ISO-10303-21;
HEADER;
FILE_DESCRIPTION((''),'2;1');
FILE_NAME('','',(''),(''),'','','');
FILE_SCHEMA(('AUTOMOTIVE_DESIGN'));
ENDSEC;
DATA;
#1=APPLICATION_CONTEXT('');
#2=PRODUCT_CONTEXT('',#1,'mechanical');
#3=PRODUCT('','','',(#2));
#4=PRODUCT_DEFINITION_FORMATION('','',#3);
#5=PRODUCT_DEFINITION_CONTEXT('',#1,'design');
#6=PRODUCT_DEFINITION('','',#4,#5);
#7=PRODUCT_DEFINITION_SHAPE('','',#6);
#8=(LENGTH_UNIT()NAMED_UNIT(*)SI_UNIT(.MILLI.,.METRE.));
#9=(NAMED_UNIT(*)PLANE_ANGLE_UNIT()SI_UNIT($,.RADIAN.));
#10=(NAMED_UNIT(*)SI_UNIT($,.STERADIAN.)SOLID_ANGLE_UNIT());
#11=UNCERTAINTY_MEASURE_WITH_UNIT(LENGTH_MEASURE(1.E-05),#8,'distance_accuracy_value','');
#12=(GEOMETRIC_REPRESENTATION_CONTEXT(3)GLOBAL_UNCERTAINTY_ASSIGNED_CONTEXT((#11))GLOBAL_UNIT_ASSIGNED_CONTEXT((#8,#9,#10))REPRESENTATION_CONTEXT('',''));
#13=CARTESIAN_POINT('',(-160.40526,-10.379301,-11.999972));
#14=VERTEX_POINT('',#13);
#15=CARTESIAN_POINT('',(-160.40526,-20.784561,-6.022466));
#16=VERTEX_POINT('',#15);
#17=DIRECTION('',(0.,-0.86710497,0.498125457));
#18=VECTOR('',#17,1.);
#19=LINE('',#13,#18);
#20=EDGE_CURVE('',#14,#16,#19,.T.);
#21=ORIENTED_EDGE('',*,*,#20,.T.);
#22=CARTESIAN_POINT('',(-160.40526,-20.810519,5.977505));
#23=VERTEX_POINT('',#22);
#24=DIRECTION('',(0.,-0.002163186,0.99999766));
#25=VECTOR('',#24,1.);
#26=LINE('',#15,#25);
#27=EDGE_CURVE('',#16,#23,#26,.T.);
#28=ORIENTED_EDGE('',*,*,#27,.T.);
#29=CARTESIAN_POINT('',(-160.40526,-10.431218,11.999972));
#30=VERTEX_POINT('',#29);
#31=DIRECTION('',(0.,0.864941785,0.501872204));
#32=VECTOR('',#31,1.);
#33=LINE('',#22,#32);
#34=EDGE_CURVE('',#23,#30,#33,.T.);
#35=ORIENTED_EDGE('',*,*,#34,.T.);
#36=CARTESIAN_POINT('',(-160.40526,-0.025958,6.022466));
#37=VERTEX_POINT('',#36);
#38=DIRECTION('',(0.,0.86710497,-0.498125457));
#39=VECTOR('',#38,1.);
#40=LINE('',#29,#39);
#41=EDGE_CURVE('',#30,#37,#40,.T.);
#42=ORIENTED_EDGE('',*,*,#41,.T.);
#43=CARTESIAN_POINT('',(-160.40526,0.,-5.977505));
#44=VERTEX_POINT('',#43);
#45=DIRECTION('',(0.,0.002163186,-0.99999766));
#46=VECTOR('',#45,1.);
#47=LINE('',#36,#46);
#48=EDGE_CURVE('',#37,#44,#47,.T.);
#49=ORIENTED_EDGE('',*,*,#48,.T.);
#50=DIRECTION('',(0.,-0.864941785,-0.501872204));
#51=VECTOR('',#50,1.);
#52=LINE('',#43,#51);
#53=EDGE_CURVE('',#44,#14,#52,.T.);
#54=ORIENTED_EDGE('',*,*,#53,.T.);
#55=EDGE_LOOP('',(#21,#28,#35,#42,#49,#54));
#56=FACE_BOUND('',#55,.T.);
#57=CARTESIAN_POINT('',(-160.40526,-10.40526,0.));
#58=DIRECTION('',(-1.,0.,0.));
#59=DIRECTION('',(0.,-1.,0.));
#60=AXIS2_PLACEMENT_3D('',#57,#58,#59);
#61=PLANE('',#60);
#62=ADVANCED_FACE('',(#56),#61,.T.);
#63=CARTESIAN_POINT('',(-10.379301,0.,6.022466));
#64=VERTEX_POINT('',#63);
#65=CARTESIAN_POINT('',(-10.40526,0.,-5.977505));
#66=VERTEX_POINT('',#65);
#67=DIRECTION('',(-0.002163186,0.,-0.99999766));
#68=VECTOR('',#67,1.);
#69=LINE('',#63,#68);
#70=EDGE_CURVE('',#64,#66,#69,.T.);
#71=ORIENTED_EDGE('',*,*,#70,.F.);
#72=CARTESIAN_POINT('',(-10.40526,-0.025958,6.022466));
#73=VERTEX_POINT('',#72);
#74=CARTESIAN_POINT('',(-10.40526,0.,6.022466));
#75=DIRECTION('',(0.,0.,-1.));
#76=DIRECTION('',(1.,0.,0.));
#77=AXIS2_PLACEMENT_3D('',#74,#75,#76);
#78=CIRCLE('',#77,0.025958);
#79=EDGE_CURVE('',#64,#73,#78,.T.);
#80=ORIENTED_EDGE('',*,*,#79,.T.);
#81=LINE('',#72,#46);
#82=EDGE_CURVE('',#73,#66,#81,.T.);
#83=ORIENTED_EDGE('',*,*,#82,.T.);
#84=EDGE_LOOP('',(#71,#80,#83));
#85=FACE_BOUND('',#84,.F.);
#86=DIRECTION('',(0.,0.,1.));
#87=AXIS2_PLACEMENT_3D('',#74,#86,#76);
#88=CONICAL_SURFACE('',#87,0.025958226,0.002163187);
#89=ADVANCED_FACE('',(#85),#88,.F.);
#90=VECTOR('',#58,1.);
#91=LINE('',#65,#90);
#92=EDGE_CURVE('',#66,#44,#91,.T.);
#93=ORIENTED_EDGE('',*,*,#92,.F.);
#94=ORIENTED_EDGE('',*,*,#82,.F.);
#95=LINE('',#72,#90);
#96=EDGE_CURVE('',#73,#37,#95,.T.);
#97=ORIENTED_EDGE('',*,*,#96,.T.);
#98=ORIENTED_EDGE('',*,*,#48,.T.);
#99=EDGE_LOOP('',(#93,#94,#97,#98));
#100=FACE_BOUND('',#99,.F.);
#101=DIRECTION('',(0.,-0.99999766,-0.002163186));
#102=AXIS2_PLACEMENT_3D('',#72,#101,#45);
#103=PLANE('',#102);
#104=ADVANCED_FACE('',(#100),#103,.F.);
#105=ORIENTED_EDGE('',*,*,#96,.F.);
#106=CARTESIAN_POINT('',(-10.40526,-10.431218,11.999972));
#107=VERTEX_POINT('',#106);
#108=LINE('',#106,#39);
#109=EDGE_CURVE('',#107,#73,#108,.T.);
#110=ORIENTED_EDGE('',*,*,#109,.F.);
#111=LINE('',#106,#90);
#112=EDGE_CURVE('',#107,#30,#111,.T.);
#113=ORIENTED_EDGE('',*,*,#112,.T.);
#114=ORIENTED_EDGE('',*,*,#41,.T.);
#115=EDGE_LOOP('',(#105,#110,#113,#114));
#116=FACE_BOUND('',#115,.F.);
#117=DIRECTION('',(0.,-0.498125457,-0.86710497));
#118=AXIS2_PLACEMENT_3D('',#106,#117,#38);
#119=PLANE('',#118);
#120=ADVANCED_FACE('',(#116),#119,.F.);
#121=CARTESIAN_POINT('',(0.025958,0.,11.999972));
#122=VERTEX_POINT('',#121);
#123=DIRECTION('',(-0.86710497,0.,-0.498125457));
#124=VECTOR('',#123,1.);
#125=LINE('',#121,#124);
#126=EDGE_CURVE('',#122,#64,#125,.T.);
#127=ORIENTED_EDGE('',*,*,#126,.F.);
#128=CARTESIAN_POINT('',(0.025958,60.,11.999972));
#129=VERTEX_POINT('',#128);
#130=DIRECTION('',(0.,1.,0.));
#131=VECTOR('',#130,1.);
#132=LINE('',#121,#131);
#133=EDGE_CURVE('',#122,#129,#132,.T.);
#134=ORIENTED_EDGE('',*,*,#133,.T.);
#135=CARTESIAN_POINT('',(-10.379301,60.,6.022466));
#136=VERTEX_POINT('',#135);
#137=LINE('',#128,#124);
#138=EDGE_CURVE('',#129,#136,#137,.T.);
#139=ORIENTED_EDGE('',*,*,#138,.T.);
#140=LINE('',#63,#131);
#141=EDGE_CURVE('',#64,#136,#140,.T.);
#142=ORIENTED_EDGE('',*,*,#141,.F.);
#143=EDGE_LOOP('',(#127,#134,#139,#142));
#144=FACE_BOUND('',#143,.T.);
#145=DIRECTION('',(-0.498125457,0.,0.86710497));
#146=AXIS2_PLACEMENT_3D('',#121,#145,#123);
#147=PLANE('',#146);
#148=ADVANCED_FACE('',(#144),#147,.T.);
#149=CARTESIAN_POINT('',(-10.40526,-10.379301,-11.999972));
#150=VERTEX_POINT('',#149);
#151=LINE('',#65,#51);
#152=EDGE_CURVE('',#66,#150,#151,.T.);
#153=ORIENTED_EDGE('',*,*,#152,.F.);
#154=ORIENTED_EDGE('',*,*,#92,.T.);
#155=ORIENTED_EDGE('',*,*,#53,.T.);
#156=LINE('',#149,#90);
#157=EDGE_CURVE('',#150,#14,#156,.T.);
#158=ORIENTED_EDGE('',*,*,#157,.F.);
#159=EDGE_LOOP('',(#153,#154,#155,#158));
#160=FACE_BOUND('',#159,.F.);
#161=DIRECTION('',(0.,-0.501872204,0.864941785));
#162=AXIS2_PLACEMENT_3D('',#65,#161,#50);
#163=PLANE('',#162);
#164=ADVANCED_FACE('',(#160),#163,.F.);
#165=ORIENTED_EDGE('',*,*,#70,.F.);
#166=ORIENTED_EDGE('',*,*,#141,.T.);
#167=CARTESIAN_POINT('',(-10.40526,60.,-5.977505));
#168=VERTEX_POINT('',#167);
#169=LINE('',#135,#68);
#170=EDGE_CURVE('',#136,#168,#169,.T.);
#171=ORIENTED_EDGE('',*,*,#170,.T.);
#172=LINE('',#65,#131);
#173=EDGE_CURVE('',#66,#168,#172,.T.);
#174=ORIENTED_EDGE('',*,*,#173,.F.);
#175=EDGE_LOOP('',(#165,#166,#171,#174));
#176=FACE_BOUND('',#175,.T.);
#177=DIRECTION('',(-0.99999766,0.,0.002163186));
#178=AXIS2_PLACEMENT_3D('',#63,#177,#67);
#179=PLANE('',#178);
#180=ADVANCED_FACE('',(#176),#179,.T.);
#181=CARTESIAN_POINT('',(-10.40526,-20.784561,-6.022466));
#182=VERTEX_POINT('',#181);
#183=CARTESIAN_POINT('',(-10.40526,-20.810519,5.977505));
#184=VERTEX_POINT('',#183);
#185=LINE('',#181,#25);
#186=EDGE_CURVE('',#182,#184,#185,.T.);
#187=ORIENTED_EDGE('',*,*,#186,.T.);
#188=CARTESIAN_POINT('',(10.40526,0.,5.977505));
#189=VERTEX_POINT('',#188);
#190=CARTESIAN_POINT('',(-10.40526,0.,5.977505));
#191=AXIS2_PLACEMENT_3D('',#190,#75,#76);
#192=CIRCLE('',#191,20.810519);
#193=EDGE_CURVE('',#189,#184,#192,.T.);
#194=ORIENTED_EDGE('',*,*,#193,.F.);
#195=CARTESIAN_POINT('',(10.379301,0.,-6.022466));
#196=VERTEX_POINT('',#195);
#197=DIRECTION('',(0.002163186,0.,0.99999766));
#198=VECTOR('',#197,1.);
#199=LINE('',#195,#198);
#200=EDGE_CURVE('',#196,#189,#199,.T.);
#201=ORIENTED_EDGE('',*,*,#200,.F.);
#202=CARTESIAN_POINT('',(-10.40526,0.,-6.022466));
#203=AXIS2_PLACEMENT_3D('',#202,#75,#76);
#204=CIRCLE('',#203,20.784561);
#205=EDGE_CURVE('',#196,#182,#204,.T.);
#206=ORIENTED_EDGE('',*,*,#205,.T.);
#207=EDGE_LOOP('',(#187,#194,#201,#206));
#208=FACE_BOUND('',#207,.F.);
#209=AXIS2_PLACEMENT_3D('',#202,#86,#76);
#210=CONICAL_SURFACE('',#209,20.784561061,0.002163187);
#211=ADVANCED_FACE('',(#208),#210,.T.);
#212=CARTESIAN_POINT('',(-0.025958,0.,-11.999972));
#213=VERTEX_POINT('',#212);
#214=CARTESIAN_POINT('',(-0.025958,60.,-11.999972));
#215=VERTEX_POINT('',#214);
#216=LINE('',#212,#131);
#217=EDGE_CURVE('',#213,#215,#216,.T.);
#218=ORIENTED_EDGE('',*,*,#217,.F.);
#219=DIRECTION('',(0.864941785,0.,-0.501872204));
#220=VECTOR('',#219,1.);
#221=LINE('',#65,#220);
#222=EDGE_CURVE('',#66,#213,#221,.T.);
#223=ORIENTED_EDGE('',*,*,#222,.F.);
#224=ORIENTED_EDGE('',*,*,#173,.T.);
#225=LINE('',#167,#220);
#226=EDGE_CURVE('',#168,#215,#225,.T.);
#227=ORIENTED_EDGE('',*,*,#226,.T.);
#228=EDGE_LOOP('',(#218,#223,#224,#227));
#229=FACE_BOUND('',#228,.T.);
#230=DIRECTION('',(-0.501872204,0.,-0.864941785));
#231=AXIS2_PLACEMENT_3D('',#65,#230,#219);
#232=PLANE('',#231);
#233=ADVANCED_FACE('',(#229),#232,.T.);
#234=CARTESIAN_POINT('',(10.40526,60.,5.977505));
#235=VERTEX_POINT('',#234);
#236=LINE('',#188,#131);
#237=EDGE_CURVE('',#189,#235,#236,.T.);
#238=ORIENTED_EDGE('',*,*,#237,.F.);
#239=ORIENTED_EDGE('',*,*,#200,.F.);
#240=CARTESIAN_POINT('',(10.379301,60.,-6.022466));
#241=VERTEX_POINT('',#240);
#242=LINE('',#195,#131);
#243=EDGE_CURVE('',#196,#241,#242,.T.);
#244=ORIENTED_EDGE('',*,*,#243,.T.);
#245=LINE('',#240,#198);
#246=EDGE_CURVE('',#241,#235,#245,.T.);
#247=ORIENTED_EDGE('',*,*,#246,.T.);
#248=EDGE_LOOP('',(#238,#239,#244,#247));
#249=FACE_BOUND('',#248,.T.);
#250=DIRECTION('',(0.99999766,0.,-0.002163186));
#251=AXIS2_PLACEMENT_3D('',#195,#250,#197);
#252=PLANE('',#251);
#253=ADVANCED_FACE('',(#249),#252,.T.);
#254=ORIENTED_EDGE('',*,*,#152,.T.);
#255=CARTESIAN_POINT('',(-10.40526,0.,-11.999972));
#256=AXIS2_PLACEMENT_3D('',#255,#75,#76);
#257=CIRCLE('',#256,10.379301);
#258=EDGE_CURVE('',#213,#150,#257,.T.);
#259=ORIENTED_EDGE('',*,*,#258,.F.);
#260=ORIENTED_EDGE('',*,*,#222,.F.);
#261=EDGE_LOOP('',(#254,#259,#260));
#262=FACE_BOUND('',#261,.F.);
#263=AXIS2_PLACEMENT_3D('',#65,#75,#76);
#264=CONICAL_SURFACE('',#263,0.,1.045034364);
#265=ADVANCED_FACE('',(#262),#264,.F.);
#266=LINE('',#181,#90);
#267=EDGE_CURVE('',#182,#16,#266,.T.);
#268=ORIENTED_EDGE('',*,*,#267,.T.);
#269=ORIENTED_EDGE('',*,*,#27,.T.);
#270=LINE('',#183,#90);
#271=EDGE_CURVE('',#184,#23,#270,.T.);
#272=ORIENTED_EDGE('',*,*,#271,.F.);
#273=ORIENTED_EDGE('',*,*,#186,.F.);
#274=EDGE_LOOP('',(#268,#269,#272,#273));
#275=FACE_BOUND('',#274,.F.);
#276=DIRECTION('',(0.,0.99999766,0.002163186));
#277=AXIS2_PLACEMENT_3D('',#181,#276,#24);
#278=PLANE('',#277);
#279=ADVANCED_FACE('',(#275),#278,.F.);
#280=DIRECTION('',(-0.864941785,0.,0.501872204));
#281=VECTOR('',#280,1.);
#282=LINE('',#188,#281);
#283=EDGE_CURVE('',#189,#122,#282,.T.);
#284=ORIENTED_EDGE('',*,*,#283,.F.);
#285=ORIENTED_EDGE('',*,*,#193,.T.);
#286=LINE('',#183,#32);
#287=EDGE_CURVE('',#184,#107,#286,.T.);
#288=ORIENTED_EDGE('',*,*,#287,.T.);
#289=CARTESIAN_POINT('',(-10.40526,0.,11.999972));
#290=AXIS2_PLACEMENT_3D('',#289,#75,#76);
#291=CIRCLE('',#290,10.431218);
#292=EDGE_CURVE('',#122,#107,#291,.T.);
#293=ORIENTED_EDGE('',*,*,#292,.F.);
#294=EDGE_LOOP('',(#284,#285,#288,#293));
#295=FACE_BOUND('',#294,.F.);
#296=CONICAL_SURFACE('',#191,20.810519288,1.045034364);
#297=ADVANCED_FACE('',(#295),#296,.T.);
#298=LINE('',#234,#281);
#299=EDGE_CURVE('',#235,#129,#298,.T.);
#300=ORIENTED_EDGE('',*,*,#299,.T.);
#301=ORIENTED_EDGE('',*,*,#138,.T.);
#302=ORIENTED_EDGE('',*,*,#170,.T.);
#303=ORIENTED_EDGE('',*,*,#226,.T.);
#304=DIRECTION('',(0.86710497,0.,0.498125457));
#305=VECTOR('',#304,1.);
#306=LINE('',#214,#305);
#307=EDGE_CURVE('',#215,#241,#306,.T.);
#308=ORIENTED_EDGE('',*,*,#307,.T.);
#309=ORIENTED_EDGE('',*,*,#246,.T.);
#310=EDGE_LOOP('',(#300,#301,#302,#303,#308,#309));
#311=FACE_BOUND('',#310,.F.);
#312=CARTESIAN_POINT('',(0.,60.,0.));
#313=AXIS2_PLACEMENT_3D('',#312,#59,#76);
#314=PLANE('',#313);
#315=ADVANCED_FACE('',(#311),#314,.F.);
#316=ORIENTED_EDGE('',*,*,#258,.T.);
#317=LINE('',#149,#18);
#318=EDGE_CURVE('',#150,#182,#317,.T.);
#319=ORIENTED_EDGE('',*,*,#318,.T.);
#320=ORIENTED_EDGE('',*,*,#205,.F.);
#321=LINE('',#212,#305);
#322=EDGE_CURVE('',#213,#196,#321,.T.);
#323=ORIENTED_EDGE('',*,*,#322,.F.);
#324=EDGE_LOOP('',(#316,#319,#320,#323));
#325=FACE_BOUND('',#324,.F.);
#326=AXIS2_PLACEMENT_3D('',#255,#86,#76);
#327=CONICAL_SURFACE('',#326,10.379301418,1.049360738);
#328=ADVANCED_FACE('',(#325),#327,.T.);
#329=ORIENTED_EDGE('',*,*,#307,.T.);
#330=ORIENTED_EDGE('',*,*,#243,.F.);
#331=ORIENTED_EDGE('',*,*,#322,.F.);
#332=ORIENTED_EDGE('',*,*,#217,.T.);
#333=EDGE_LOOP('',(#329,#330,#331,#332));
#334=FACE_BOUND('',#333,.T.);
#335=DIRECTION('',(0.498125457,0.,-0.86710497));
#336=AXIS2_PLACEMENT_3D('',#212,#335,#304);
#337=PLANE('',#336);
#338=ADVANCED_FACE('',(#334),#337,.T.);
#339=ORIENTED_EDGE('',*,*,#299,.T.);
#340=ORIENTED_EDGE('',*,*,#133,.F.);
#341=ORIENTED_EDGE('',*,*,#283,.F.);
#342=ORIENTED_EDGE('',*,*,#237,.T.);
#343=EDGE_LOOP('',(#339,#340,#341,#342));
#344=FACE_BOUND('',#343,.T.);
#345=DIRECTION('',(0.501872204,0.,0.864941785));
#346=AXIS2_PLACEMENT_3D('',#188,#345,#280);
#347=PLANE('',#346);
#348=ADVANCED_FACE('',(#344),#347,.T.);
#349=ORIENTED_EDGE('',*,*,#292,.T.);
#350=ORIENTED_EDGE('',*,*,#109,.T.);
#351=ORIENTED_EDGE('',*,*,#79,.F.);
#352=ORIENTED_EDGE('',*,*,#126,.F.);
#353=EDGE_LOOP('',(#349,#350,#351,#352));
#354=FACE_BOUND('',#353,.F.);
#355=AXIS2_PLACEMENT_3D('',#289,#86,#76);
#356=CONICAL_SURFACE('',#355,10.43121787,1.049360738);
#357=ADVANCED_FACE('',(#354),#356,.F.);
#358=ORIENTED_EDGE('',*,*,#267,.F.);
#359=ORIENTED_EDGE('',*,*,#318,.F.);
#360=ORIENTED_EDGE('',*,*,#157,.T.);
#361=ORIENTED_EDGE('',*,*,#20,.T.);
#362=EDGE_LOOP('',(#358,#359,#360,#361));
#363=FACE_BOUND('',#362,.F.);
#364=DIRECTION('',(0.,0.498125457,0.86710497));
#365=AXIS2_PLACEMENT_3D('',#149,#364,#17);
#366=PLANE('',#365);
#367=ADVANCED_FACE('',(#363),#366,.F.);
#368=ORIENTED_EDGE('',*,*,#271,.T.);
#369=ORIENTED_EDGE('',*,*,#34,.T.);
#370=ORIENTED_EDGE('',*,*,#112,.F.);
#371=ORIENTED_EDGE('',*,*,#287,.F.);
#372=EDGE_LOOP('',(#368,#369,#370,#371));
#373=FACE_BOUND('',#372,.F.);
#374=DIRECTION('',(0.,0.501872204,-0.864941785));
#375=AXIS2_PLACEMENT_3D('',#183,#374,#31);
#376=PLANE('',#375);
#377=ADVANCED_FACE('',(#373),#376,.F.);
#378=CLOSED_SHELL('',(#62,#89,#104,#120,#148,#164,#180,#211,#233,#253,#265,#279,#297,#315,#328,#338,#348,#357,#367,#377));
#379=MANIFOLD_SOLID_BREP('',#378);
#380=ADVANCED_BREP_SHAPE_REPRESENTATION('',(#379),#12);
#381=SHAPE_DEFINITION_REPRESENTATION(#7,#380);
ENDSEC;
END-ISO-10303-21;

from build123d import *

# Parameters (mm, degrees)
F1_ANGLE = 90
F2_DEPTH = 60
F4_DEPTH = 150


with BuildPart() as f1:
    # F0 (on Front) → F1 (revolve)
    with BuildSketch(Plane.XZ):
        Polygon((-0.0259582262, -11.9999719237), (10.3793014176, -6.0224664452), (10.4052596438, 5.9775054785), (0.0259582262, 11.9999719237), (-10.3793014176, 6.0224664452), (-10.4052596438, -5.9775054785), align=None)
    revolve(axis=Axis((-10.4052596438, 0, 8.529782465), (0, 0, -1)), revolution_arc=F1_ANGLE)

    # F0 (on Front) → F2 (join)
    with BuildSketch(Plane.XZ):
        Polygon((-0.0259582262, -11.9999719237), (10.3793014176, -6.0224664452), (10.4052596438, 5.9775054785), (0.0259582262, 11.9999719237), (-10.3793014176, 6.0224664452), (-10.4052596438, -5.9775054785), align=None)
    extrude(amount=-F2_DEPTH)

    # F3 (on face) → F4 (join)
    with BuildSketch(Plane(origin=(-10.4052596438, 0, 0), x_dir=(0, -1, 0), z_dir=(-1, 0, 0))):
        Polygon((0, -5.9775054785), (10.3793014176, -11.9999719237), (20.7845610613, -6.0224664452), (20.8105192875, 5.9775054785), (10.43121787, 11.9999719237), (0.0259582262, 6.0224664452), align=None)
    extrude(amount=F4_DEPTH)


solid = f1.part
